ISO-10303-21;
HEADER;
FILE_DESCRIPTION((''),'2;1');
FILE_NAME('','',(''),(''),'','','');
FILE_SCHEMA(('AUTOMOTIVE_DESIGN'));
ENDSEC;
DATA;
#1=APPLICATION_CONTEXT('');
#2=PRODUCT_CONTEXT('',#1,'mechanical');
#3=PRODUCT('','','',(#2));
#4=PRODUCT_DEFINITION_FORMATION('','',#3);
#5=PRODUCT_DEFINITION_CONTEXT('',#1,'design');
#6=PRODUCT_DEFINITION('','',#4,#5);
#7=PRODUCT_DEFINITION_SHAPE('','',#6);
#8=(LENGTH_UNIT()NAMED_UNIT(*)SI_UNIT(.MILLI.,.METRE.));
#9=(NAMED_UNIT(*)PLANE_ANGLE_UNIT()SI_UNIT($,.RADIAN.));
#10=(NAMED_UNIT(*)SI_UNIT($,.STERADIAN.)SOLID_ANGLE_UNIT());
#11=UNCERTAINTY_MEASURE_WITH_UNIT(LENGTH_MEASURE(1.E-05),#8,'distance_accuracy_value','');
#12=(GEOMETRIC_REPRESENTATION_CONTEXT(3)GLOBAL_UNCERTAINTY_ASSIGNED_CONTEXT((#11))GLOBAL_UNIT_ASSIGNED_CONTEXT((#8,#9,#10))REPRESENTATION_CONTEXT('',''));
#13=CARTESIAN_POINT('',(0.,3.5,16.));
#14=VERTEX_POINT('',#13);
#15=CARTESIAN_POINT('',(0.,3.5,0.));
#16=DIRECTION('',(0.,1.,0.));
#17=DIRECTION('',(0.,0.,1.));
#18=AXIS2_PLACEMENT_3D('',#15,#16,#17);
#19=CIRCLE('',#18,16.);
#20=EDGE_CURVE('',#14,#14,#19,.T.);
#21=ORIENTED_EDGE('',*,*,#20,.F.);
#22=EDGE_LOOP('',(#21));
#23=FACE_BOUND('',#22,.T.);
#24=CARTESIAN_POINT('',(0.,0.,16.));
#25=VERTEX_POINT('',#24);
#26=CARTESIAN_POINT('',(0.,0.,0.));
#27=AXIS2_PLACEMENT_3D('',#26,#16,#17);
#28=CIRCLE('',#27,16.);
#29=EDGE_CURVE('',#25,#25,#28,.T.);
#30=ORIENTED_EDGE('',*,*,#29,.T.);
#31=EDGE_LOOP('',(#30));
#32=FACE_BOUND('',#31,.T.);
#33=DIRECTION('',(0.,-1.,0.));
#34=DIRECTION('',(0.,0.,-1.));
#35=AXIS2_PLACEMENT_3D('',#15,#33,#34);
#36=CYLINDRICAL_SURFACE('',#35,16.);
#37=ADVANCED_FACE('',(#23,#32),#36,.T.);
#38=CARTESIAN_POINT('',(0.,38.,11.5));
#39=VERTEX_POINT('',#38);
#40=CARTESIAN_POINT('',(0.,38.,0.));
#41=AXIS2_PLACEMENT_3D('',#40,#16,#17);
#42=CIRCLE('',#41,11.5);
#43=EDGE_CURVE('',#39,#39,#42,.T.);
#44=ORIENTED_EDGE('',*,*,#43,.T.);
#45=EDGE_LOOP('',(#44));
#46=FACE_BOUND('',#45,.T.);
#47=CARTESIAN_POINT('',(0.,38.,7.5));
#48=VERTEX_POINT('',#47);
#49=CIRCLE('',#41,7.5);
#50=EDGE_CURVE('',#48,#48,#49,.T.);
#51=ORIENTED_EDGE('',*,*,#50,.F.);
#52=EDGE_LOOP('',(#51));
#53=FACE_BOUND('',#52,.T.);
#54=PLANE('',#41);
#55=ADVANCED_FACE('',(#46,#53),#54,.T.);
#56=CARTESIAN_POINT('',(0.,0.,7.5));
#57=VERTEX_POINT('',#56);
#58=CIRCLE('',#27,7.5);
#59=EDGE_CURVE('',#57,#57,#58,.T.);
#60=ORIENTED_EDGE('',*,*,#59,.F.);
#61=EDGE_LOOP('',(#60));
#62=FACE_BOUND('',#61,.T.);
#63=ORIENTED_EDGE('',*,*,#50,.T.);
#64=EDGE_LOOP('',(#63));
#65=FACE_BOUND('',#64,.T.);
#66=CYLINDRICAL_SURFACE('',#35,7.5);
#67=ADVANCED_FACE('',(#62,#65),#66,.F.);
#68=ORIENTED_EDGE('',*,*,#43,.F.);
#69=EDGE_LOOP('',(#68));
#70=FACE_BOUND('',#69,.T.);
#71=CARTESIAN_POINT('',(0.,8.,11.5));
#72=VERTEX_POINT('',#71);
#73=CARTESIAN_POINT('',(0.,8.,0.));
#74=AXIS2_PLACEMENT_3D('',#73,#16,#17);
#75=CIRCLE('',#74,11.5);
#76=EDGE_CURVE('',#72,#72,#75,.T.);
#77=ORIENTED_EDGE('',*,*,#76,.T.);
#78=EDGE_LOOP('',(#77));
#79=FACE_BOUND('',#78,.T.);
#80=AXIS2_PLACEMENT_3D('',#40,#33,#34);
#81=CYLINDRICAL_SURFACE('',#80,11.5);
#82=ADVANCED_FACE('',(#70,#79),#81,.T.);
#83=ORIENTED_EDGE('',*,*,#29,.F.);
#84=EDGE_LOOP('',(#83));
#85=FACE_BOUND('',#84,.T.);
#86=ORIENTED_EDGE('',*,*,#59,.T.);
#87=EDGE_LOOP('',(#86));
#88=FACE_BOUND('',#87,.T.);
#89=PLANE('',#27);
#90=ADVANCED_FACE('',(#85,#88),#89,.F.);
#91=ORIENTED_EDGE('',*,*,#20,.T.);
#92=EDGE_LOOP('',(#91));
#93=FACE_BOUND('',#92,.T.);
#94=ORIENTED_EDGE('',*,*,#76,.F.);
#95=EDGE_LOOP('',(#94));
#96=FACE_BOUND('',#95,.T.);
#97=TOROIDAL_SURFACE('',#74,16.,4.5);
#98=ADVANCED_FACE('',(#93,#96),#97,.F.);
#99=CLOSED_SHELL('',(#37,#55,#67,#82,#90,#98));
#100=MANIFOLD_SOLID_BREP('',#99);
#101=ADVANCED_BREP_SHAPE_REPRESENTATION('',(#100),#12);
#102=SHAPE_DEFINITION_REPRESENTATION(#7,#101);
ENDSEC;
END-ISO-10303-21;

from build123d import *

# Parameters (mm, degrees)
SKETCH_1_R      = 16
SKETCH_1_R_2    = 7.5
EXTRUDE_1_DEPTH = 3.5
SKETCH_2_R      = 11.5
SKETCH_2_R_2    = 7.5
EXTRUDE_2_DEPTH = 34.5
FILLET_3_R      = 4.5


with BuildPart() as part:
    # 草圖1 → 填料-伸長1 (new body)
    with BuildSketch(Plane(origin=(0, 0, 0), x_dir=(1, 0, 0), z_dir=(0, 1, 0))):
        with Locations(Location((0, 0, 0), (0, 0, 270))):
            Circle(SKETCH_1_R)
        with Locations(Location((0, 0, 0), (0, 0, 270))):
            Circle(SKETCH_1_R_2, mode=Mode.SUBTRACT)
    extrude(amount=EXTRUDE_1_DEPTH)

    # 草圖2 → 填料-伸長2 (add)
    with BuildSketch(Plane(origin=(0, 3.5, 0), x_dir=(1, 0, 0), z_dir=(0, 1, 0))):
        with Locations(Location((0, 0, 0), (0, 0, 270))):
            Circle(SKETCH_2_R)
        with Locations(Location((0, 0, 0), (0, 0, 270))):
            Circle(SKETCH_2_R_2, mode=Mode.SUBTRACT)
    extrude(amount=EXTRUDE_2_DEPTH)

    # 圓角3
    fillet_3_edges = [part.edges().sort_by_distance(p)[0] for p in [
        (0, 3.5, -11.5),
    ]]
    fillet(fillet_3_edges, radius=FILLET_3_R - 0.0001)  # a hair under: the kernel refuses the full size


solid = part.part
